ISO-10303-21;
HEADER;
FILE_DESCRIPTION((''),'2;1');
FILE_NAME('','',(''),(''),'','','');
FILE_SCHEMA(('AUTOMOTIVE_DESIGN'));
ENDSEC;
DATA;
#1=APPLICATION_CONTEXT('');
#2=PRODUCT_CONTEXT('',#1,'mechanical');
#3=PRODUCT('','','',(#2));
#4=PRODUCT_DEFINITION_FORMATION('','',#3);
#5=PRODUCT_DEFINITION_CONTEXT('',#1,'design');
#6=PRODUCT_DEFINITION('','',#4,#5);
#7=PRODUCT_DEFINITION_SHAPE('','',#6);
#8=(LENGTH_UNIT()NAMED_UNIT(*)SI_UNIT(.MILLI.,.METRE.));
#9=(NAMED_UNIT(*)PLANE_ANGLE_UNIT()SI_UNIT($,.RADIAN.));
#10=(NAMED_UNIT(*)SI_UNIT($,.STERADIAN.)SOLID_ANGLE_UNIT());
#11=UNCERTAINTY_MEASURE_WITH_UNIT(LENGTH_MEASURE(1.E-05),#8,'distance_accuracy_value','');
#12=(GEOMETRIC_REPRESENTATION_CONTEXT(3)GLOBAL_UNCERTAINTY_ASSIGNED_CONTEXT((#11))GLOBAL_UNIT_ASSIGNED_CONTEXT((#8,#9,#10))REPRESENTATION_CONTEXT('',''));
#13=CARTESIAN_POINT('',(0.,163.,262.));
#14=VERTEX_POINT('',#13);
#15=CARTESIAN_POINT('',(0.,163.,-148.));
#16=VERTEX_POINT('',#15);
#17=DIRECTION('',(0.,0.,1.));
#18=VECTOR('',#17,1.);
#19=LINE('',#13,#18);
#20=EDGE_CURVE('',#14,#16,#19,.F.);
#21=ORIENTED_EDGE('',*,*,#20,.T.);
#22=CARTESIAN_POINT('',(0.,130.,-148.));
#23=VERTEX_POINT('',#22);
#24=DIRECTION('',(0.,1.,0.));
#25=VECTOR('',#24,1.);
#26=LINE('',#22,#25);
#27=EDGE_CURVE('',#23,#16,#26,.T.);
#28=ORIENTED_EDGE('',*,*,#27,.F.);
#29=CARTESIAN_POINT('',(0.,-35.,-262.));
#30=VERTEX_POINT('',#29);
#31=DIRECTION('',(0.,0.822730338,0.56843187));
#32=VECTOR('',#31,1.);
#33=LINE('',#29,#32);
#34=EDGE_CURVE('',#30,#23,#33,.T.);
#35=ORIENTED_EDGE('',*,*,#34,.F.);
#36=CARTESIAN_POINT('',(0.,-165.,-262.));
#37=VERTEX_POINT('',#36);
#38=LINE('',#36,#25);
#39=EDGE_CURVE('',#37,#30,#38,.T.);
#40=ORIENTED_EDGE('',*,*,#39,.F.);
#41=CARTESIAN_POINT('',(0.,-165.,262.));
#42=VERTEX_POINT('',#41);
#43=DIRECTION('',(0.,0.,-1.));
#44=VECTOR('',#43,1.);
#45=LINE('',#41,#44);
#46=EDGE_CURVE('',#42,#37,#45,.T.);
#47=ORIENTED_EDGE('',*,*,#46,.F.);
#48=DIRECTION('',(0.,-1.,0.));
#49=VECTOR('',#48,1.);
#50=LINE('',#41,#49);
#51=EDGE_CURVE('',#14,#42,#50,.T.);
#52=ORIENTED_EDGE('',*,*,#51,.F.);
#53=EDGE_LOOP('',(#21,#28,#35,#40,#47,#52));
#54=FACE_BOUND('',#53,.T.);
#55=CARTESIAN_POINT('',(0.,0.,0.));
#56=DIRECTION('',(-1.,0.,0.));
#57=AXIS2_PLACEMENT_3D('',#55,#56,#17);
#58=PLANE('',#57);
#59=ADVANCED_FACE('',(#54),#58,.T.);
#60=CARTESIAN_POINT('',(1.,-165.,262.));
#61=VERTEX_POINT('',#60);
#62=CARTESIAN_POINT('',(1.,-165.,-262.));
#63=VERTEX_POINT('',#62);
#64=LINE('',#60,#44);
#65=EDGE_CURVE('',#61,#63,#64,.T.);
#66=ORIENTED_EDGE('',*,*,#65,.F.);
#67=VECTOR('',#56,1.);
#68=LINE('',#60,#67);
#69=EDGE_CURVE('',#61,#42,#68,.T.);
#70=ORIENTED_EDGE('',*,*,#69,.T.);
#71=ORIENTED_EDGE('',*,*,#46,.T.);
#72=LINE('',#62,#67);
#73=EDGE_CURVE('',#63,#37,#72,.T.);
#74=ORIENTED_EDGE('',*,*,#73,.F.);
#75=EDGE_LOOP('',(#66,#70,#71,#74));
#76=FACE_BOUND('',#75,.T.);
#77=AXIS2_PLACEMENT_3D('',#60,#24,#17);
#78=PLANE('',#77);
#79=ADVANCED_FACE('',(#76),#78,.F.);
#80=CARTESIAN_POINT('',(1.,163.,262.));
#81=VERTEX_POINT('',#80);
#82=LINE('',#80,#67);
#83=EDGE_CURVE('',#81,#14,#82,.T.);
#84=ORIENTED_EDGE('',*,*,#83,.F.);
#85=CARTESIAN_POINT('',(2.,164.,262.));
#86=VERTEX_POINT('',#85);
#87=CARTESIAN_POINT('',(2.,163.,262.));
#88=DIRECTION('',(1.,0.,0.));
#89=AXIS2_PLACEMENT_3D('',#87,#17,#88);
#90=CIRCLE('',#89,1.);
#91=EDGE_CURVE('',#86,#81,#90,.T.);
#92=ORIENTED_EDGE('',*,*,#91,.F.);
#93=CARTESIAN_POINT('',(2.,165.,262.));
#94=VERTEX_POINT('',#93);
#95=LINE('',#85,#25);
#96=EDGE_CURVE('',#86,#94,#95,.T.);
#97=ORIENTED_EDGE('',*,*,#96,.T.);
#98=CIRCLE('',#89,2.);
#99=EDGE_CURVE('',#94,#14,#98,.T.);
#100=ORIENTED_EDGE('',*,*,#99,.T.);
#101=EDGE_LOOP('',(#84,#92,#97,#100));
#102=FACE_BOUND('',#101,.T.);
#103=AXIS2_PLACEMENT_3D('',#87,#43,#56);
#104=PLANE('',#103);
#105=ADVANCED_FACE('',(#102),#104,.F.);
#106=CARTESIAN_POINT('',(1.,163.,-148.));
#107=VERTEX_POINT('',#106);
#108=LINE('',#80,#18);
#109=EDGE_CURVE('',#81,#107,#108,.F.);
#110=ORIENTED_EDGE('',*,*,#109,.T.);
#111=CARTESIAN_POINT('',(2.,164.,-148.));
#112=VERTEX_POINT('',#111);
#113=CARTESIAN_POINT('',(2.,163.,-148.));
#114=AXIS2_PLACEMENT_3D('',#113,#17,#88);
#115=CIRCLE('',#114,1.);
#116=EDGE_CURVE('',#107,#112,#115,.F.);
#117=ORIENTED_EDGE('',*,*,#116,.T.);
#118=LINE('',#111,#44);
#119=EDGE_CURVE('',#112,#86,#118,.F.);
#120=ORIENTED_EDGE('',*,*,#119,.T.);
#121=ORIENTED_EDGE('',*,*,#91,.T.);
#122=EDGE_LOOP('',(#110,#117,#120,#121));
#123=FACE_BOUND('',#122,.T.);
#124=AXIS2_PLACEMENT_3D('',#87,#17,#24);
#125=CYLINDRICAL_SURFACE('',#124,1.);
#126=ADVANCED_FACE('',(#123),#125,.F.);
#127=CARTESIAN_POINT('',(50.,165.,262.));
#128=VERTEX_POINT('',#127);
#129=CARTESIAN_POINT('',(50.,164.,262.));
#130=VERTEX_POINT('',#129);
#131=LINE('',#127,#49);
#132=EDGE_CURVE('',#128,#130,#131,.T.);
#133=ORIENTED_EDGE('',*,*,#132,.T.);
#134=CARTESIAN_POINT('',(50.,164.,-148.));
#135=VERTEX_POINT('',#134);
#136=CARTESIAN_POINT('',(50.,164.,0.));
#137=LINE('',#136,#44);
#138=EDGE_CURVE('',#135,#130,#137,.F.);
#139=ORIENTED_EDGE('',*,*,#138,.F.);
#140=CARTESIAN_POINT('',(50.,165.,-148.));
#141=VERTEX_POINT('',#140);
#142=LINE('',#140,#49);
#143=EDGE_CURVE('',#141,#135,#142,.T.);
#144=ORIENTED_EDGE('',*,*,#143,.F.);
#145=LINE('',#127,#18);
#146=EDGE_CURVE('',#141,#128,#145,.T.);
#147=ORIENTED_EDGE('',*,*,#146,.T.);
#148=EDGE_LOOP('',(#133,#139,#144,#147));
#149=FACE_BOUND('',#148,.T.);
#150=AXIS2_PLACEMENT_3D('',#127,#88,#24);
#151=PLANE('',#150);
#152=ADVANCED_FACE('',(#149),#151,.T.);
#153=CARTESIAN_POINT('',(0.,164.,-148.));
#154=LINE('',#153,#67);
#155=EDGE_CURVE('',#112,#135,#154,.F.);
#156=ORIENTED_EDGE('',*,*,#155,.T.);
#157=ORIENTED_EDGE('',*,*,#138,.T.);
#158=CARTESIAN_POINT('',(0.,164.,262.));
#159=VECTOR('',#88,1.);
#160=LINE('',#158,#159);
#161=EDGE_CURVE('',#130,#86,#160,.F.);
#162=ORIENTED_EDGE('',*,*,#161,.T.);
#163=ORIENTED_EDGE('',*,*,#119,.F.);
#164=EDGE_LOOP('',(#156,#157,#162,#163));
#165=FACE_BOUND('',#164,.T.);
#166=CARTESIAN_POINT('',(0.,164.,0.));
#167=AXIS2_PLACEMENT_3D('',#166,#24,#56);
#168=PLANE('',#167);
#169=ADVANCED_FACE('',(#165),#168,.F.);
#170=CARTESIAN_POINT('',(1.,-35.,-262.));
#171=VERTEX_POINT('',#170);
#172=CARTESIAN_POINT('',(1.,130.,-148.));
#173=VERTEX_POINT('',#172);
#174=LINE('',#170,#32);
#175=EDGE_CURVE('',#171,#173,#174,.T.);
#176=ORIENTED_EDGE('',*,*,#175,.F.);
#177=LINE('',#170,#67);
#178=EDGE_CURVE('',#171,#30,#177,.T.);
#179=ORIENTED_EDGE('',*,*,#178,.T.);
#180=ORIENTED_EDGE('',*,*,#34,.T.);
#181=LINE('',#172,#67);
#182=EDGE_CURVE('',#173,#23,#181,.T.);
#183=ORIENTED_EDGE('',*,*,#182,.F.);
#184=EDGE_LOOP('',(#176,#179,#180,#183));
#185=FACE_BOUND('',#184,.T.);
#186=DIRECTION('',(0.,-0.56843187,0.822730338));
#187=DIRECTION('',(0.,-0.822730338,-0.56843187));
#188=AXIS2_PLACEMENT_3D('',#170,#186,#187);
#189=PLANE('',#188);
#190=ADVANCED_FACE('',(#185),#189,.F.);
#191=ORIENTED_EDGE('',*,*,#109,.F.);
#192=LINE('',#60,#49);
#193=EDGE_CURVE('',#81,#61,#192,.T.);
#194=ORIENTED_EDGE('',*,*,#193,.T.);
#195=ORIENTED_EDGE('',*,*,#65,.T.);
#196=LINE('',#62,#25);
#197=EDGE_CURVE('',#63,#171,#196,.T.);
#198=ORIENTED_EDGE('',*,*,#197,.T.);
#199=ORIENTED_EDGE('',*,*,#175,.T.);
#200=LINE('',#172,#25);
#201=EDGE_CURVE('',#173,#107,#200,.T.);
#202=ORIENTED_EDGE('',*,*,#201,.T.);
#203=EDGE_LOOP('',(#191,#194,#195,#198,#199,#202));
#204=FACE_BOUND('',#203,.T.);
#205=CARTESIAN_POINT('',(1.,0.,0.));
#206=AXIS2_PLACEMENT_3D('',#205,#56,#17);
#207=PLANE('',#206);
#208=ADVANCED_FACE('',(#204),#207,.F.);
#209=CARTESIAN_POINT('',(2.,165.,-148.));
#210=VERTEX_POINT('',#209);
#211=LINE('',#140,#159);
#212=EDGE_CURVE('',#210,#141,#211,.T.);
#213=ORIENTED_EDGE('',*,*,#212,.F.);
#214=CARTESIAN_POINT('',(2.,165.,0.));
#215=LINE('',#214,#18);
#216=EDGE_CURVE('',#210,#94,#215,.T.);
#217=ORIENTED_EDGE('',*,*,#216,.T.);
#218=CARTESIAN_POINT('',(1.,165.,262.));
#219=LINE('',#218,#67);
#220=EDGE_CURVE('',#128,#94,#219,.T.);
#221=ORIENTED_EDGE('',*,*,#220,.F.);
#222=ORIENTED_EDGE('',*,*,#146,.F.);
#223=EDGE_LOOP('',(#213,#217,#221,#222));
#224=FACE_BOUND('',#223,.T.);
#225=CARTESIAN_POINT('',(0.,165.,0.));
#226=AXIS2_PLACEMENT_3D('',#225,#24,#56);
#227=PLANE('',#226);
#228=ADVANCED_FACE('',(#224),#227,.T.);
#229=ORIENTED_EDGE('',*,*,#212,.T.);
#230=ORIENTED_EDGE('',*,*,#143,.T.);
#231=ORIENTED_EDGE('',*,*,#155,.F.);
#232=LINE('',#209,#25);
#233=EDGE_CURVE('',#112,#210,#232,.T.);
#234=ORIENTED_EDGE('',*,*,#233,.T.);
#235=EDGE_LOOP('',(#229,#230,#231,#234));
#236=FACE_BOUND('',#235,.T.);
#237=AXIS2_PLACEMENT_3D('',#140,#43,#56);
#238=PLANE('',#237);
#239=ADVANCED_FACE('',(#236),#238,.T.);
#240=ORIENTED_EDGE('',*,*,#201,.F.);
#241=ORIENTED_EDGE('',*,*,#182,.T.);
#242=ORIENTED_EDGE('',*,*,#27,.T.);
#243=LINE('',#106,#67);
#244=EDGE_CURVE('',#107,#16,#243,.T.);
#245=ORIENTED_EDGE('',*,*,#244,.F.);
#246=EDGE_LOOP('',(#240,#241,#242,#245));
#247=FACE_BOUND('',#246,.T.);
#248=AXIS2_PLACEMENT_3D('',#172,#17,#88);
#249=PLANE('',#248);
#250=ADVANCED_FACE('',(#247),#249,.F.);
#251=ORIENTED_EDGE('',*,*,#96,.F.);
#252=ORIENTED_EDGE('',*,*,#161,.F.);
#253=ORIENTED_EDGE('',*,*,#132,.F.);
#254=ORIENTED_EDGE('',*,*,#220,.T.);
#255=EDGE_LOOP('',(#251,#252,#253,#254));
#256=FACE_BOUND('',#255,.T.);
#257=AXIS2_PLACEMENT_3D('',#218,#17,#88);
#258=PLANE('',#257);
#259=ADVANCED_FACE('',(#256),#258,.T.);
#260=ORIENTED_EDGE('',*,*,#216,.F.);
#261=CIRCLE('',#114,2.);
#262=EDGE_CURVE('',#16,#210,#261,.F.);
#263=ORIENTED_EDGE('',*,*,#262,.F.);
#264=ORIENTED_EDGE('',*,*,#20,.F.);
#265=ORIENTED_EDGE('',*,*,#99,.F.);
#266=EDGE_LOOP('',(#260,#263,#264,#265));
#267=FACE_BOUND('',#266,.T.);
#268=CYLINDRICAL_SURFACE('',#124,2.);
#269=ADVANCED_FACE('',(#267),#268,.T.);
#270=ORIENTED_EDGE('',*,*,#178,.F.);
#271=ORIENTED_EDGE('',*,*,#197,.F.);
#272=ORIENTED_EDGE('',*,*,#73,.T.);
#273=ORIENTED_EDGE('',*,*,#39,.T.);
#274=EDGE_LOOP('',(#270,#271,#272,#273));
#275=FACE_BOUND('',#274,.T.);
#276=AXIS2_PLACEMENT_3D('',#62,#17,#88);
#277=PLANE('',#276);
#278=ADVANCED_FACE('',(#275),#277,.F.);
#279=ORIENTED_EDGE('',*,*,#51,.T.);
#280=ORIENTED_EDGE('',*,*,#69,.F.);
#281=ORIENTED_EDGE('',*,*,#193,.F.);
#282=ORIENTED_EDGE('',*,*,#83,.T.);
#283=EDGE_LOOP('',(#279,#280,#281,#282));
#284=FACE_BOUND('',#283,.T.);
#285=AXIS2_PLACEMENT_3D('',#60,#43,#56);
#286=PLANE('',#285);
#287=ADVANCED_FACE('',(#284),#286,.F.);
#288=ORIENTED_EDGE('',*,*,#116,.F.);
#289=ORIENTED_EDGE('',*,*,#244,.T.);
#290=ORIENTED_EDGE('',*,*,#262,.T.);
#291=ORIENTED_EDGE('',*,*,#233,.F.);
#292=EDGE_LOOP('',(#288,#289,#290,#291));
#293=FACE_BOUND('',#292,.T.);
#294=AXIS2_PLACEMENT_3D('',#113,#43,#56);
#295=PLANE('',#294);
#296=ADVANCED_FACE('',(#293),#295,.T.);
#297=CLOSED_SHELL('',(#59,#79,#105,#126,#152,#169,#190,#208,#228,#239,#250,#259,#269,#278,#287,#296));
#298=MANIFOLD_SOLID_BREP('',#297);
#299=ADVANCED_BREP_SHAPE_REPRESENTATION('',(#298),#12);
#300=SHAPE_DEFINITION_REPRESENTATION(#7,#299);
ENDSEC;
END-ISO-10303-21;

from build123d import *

# Parameters (mm, degrees)
EXTRUDE_1_DEPTH                  = 1
SM_EDGE_FLANGE_1_STRIP_W         = 6
SM_EDGE_FLANGE_1_STRIP_H         = 1
SM_EDGE_FLANGE_1_STRIP_CUT_DEPTH = 410
SM_EDGE_FLANGE_1_DEPTH           = 410


# Sheet-metal steps are written as plain solids
with BuildPart() as part:
    # Sketch 1 → Бобышка-Вытянуть1 (new body)
    with BuildSketch(Plane(origin=(0, 0, 0), x_dir=(0, 0, -1), z_dir=(1, 0, 0))):
        Polygon((-262, -165), (262, -165), (262, -35), (148, 130), (148, 165), (-262, 165), align=None)
    extrude(amount=EXTRUDE_1_DEPTH)

    # Ребро-кромка1 strip (across the edge) → Ребро-кромка1 strip cut (cut)
    with BuildSketch(Plane(origin=(1, 165, -148), x_dir=(0, -1, 0), z_dir=(0, 0, 1))):
        with Locations((-1, -0.5)):
            Rectangle(SM_EDGE_FLANGE_1_STRIP_W, SM_EDGE_FLANGE_1_STRIP_H)
    extrude(amount=SM_EDGE_FLANGE_1_STRIP_CUT_DEPTH, mode=Mode.SUBTRACT)

    # Ребро-кромка1 section (across the edge) → Ребро-кромка1 (add)
    with BuildSketch(Plane(origin=(1, 165, -148), x_dir=(0, -1, 0), z_dir=(0, 0, 1))):
        with BuildLine():
            Line((0, 1), (0, 49))
            Line((0, 49), (1, 49))
            Line((1, 49), (1, 1))
            ThreePointArc((1, 1), (1.292893219, 0.292893219), (2, 0))
            Line((2, 0), (2, -1))
            ThreePointArc((2, -1), (0.585786438, -0.414213562), (0, 1))
        make_face()
    extrude(amount=SM_EDGE_FLANGE_1_DEPTH)


solid = part.part
